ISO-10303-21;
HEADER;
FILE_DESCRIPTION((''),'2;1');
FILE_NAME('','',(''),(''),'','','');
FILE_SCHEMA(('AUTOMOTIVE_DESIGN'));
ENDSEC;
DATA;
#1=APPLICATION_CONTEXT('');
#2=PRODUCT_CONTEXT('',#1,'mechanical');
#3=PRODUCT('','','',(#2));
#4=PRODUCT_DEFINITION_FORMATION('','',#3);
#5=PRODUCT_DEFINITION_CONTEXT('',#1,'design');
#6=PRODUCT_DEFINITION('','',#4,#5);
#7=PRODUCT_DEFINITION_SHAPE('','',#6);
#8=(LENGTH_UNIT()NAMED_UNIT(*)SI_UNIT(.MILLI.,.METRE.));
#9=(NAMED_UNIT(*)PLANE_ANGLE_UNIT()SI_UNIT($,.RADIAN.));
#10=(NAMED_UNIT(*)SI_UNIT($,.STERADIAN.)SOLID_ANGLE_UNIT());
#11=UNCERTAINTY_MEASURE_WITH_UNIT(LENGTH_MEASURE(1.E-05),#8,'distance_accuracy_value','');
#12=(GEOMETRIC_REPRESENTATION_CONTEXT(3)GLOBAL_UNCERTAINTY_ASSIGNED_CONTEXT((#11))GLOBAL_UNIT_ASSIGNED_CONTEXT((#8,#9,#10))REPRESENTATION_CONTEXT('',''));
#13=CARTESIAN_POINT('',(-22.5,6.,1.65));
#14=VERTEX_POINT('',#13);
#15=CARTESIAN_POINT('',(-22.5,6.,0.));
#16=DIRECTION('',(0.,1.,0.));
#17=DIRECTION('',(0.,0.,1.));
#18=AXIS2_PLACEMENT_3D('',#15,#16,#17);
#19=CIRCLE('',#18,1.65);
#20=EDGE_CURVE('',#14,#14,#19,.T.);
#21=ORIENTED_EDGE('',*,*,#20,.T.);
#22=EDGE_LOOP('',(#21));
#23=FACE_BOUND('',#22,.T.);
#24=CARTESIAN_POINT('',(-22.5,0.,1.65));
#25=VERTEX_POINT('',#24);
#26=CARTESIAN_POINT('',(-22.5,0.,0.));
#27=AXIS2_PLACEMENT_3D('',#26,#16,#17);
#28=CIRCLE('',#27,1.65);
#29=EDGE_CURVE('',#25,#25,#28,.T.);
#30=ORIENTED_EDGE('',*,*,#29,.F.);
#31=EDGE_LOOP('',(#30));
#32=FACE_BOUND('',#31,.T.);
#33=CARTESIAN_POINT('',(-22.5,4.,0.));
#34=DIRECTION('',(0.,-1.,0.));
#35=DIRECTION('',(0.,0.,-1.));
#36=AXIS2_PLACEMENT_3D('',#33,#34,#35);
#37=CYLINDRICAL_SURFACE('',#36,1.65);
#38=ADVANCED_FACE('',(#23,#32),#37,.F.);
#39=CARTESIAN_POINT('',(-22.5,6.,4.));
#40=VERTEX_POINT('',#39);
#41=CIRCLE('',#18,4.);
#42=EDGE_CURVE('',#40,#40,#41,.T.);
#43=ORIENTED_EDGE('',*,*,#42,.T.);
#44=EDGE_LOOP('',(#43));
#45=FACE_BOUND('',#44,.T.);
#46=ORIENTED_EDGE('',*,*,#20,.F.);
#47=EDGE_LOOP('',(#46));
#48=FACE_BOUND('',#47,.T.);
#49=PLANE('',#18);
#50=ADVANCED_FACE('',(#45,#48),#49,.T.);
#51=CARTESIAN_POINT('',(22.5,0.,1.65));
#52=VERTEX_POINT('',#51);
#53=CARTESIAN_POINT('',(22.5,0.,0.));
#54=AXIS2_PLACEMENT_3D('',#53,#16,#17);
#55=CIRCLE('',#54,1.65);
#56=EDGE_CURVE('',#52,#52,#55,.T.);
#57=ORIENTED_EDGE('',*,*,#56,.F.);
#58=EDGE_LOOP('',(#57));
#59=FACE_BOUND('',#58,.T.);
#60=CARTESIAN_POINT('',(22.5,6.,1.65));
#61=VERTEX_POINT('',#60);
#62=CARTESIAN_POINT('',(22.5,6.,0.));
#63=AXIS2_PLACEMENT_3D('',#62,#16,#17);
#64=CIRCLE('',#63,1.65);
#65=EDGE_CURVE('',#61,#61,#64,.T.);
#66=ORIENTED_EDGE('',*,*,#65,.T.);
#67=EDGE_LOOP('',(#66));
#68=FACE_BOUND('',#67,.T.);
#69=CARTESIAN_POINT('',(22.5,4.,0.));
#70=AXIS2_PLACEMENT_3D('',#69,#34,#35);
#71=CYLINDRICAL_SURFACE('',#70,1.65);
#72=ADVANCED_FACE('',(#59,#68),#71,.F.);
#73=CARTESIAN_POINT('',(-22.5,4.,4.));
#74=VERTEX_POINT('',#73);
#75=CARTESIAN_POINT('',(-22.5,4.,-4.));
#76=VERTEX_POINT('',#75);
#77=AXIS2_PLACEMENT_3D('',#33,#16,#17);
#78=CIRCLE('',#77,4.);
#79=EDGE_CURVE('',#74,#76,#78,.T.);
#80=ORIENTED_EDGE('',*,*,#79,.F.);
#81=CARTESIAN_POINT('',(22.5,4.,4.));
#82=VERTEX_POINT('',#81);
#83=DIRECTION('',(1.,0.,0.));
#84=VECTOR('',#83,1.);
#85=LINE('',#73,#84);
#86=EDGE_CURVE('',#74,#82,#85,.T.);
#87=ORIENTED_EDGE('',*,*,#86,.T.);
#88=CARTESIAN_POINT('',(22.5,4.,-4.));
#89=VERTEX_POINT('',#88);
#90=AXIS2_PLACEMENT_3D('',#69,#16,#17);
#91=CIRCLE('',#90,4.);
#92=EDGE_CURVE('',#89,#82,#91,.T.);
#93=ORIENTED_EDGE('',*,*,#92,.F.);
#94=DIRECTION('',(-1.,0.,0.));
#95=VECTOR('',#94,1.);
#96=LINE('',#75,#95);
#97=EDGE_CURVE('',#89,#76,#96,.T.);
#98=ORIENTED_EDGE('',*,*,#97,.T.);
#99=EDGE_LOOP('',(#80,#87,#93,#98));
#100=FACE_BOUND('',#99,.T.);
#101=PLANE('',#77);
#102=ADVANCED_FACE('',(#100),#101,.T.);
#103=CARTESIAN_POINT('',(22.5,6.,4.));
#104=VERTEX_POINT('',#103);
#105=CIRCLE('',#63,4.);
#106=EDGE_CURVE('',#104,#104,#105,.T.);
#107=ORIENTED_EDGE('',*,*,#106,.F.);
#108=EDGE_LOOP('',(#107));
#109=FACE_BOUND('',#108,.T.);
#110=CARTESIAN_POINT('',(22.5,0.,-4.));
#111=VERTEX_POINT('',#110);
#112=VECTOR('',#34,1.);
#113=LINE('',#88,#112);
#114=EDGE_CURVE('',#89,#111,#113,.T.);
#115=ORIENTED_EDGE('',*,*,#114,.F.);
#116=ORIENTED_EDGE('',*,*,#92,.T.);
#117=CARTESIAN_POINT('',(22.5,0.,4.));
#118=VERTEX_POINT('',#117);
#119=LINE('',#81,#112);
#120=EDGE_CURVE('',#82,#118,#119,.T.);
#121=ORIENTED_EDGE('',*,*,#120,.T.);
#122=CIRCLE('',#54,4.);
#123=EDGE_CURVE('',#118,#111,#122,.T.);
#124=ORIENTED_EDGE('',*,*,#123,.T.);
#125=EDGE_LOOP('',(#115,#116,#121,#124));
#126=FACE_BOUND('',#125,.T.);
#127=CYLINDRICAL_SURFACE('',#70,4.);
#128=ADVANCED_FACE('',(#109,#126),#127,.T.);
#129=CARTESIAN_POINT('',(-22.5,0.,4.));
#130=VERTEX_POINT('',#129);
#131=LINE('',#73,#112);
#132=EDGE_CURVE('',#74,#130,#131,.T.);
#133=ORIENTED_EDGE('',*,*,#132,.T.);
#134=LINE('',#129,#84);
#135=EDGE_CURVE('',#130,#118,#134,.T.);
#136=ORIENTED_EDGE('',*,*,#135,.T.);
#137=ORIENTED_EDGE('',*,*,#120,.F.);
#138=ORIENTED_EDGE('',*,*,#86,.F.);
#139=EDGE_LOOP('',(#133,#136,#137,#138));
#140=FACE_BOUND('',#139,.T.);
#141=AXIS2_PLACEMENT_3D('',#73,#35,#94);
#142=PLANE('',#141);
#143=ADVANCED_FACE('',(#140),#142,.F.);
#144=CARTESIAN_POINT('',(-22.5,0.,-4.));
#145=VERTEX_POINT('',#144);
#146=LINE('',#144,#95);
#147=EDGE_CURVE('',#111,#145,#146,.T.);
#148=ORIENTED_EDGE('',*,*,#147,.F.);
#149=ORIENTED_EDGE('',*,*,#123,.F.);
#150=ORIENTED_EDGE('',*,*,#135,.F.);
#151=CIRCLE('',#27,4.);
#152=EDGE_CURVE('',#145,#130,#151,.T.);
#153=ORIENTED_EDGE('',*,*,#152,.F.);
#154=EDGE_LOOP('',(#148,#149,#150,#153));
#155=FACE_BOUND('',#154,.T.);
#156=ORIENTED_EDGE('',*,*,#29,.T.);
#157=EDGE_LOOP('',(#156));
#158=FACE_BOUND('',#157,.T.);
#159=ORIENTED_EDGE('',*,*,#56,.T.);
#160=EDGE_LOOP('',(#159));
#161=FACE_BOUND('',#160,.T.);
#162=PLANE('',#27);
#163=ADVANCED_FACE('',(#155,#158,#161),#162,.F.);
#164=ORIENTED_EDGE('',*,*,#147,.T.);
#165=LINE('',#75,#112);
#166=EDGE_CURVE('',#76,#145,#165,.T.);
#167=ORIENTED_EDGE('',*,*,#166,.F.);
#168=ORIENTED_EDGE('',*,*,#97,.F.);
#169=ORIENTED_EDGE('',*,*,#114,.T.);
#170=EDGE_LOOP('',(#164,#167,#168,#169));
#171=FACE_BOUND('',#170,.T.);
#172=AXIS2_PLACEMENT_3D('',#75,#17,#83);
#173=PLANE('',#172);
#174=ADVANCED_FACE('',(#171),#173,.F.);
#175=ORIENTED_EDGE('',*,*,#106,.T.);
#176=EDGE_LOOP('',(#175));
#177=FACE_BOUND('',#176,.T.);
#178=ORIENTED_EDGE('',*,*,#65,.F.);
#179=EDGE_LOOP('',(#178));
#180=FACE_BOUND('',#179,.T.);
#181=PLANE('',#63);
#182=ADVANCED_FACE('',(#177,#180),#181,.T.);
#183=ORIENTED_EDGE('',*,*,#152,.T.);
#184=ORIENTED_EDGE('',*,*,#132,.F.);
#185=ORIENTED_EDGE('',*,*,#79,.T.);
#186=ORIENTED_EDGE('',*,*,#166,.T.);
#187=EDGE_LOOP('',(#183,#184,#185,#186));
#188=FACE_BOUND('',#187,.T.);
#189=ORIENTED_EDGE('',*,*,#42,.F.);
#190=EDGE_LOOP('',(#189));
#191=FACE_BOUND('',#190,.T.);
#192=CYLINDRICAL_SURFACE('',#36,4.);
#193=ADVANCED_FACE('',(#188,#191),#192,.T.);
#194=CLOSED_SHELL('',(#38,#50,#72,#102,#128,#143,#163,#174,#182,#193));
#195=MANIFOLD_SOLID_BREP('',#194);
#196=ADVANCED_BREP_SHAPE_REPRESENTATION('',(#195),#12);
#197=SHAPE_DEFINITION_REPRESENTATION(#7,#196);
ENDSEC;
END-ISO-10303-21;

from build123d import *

# Parameters (mm, degrees)
SKETCH1_R           = 1.65
BOSS_EXTRUDE1_DEPTH = 4
SKETCH2_R           = 4
SKETCH2_R_2         = 1.65
BOSS_EXTRUDE2_DEPTH = 2


with BuildPart() as part:
    # Sketch1 → Boss-Extrude1 (new body)
    with BuildSketch(Plane(origin=(0, 0, 0), x_dir=(1, 0, 0), z_dir=(0, 1, 0))):
        with BuildLine():
            Line((-22.5, 4), (22.5, 4))
            ThreePointArc((22.5, 4), (26.5, 0), (22.5, -4))
            Line((22.5, -4), (-22.5, -4))
            ThreePointArc((-22.5, -4), (-26.5, 0), (-22.5, 4))
        make_face()
        with Locations((-22.5, 0)):
            Circle(SKETCH1_R, mode=Mode.SUBTRACT)
        with Locations((22.5, 0)):
            Circle(SKETCH1_R, mode=Mode.SUBTRACT)
    extrude(amount=BOSS_EXTRUDE1_DEPTH)

    # Sketch2 → Boss-Extrude2 (add)
    # profile 1 of 2: a face of its own
    with BuildSketch(Plane(origin=(0, 4, 0), x_dir=(1, 0, 0), z_dir=(0, 1, 0))):
        with Locations((-22.5, 0)):
            Circle(SKETCH2_R)
        with Locations((-22.5, 0)):
            Circle(SKETCH2_R_2, mode=Mode.SUBTRACT)
    # profile 2 of 2: a face of its own
    with BuildSketch(Plane(origin=(0, 4, 0), x_dir=(1, 0, 0), z_dir=(0, 1, 0))):
        with Locations((22.5, 0)):
            Circle(SKETCH2_R)
        with Locations((22.5, 0)):
            Circle(SKETCH2_R_2, mode=Mode.SUBTRACT)
    extrude(amount=BOSS_EXTRUDE2_DEPTH)


solid = part.part
